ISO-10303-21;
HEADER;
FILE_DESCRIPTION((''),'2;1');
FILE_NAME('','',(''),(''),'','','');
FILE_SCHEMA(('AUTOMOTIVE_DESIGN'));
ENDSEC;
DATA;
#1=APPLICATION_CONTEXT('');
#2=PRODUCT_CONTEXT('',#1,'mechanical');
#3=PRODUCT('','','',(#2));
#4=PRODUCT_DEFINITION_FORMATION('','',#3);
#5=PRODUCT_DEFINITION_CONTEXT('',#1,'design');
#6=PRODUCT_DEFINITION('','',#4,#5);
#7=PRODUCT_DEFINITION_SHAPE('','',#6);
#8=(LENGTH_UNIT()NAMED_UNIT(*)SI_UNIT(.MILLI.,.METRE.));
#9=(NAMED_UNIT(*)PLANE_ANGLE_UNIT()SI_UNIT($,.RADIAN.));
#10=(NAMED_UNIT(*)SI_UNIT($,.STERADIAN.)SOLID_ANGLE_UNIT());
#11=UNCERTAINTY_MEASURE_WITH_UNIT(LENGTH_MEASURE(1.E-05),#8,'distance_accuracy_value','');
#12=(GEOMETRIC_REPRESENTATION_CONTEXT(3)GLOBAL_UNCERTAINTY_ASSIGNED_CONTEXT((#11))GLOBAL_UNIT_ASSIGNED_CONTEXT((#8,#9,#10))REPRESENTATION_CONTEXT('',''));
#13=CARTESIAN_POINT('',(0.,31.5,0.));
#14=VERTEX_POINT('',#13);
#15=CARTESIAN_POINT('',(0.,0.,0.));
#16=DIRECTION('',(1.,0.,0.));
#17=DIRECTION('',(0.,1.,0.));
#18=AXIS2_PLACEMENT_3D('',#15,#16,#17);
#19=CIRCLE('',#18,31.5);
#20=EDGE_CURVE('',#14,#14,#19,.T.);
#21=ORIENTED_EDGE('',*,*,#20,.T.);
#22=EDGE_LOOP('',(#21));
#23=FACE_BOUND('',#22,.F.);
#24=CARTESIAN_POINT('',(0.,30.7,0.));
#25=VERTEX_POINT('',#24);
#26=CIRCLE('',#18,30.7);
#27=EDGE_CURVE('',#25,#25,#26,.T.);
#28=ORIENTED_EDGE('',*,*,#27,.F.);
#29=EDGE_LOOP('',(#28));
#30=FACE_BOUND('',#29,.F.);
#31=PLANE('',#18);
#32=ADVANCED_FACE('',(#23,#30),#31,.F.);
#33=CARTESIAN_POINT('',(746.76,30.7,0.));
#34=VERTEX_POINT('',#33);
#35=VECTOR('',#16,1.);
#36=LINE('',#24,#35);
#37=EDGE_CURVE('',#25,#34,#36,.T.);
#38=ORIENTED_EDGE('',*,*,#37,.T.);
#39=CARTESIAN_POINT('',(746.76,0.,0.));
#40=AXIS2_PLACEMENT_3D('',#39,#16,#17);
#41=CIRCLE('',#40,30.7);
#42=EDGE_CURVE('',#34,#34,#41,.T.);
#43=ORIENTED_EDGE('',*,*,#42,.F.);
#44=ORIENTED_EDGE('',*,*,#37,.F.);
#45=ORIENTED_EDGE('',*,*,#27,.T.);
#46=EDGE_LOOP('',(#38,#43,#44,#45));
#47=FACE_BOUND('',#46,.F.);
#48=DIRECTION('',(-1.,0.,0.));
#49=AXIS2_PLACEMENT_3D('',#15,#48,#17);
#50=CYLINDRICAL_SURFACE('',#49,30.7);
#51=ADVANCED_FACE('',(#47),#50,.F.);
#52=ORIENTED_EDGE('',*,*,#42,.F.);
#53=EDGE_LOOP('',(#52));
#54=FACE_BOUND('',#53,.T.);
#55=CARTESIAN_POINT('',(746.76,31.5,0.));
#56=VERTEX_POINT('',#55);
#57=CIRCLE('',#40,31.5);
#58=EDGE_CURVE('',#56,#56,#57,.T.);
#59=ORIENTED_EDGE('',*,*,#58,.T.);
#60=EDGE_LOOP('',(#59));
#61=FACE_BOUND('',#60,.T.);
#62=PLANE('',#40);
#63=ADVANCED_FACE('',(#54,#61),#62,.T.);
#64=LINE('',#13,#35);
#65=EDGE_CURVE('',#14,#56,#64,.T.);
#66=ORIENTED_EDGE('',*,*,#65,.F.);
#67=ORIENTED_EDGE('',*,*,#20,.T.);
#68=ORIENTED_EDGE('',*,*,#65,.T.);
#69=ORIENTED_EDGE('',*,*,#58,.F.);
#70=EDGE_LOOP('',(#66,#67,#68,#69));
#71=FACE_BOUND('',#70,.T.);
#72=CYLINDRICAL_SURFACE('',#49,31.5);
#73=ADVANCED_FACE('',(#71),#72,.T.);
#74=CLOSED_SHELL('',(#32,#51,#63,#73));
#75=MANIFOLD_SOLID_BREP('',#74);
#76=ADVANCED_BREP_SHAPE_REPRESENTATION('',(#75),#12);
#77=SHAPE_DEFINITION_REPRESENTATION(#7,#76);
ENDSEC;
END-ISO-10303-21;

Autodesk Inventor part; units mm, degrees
ref_plane "YZ Plane" through (0, 0, 0) normal (1, 0, 0) x (0, 1, 0)
ref_plane "XZ Plane" through (0, 0, 0) normal (0, 1, 0) x (-1, 0, 0)
ref_plane "XY Plane" through (0, 0, 0) normal (0, 0, 1) x (1, 0, 0)
sketch "Sketch1" plane through (0, 0, 0) normal (1, 0, 0) x (0, 1, 0)
  circle A0 centre (0, 0) radius 31.5
  circle A1 centre (0, 0) radius 30.7
  dimension "d0" = 63
  dimension "d1" = 0.8
extrude "Extrusion1" add sketch "Sketch1" along normal blind 746.76
equation "\"d0\" = OD"
equation "\"d1\" = t"
equation "\"d2\" = L"
equation "\"OD\" = 63"
equation "\"t\" = 0.8"
equation "\"L\" = PL"
equation "\"ID\" = 61.4"
equation "\"PL\" = 746.76"
properties part number "ISO 4065 Pipe DN63x0.8xS40 - 619.76000000" material "PVC-Piping"
